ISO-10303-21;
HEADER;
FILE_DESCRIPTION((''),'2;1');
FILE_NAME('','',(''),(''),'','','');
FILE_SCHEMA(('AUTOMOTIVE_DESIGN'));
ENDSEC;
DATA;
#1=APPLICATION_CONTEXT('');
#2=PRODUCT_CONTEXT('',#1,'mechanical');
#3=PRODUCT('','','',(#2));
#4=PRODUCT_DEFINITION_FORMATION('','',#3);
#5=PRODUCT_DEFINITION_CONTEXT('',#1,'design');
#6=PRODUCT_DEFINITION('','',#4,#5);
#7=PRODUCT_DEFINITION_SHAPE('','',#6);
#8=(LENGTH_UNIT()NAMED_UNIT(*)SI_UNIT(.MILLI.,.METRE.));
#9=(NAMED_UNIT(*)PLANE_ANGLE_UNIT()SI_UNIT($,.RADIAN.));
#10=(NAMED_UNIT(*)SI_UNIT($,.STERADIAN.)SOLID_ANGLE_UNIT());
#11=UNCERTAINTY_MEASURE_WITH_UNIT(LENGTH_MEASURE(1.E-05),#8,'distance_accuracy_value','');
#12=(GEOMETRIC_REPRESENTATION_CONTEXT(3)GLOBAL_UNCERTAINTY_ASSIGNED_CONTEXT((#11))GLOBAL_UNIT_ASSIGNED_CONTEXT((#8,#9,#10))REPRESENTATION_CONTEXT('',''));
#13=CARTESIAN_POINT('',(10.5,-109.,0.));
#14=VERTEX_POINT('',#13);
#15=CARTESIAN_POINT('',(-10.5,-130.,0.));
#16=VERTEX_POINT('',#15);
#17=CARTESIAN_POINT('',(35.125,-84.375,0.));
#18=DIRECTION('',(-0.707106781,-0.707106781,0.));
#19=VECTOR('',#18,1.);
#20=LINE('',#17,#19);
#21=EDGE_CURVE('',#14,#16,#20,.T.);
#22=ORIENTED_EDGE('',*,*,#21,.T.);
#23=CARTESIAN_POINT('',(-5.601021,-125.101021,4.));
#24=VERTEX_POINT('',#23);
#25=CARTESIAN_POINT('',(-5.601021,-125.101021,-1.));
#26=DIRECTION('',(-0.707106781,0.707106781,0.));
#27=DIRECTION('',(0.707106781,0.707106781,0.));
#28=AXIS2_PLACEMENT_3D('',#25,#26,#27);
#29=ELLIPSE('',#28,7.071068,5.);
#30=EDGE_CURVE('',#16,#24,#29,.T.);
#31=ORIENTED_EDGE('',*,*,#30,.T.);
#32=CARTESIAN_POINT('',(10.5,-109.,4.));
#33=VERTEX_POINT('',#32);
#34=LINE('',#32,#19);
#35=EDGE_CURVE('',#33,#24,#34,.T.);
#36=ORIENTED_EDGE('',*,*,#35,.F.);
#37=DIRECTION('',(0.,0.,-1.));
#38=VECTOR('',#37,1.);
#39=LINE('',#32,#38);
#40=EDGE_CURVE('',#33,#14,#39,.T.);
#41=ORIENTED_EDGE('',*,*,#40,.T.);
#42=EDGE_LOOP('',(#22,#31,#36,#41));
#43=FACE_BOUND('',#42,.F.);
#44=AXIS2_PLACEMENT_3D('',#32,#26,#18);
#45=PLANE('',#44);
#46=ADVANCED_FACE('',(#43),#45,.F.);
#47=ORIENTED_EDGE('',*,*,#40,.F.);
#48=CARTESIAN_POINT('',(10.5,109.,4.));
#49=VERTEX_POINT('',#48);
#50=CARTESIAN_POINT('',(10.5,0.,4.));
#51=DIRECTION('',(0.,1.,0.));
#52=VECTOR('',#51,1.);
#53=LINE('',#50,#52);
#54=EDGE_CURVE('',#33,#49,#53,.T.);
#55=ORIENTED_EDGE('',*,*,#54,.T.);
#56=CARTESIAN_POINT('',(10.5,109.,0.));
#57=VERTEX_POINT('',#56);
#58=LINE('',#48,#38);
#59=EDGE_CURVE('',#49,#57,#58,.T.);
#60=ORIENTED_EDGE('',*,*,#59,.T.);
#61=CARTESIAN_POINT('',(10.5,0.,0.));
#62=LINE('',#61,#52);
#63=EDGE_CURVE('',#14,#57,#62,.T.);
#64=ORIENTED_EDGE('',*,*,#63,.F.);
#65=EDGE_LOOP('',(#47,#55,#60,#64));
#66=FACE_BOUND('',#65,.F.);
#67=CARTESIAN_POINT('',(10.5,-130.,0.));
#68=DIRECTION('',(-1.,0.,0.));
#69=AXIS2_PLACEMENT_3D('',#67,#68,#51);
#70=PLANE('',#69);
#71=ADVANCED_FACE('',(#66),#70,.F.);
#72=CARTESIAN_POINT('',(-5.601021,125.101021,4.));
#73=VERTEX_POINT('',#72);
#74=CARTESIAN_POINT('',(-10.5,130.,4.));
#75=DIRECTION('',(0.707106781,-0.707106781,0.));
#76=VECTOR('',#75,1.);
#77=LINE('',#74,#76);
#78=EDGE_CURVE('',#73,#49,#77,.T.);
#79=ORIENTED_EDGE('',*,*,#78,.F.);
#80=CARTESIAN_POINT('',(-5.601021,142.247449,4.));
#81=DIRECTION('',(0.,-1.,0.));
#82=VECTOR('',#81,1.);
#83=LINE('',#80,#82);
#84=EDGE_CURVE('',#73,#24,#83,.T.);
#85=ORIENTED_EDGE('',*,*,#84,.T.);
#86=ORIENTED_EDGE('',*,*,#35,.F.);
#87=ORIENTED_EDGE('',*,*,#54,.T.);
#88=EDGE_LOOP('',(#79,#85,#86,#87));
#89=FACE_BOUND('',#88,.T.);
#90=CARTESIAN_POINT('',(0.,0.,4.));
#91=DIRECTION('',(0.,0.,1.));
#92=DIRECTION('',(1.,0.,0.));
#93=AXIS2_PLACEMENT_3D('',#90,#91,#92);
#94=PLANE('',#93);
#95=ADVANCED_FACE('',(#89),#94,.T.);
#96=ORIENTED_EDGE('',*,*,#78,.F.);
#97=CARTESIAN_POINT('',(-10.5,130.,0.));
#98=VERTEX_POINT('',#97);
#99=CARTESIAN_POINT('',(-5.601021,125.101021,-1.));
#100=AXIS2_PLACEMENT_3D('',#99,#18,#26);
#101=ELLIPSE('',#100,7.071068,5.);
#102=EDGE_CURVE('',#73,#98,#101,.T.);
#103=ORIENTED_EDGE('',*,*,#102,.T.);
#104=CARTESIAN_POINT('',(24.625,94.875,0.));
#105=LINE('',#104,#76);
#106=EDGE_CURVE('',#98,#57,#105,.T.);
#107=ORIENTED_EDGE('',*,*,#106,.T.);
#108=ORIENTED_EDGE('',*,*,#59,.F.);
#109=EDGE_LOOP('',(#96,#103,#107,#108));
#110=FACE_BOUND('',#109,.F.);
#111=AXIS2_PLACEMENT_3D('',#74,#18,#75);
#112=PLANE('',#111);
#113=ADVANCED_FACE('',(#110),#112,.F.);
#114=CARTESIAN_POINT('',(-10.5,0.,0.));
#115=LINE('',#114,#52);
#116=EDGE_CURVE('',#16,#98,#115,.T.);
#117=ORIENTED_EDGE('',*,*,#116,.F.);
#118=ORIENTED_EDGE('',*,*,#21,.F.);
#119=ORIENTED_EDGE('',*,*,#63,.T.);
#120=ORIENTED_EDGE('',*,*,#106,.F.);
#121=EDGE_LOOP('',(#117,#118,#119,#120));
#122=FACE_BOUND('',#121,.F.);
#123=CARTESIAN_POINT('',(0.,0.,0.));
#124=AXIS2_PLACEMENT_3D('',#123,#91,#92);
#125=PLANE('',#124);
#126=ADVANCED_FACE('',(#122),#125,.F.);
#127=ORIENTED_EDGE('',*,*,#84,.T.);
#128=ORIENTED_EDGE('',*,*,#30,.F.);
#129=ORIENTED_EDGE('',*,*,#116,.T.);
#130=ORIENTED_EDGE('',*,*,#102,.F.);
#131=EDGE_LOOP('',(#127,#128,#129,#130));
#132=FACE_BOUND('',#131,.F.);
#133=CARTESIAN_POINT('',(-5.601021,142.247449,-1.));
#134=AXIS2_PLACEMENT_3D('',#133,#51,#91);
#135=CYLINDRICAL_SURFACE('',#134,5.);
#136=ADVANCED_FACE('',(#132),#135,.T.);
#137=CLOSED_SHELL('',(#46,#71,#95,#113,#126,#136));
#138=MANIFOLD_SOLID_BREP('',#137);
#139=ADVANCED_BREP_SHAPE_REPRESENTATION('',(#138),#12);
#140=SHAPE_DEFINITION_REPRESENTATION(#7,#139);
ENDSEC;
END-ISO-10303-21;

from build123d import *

# Parameters (mm, degrees)
F0_W        = 21
F0_H        = 260
F1_DEPTH    = 4
F3_DEPTH    = 4.001
F4_T1_DEPTH = 284.4948974279


# Not quite as in the source:
# - a fillet or chamfer that OpenCascade refuses, or shapes differently, is made with other operations: its cross-section is extruded or revolved along the edge and cut away or added


with BuildPart() as f1:
    # F0 (on Top) → F1 (new body)
    with BuildSketch(Plane.XY):
        Rectangle(F0_W, F0_H)
    extrude(amount=F1_DEPTH)

    # F2 (on face) → F3 (cut, through all)
    with BuildSketch(Plane.XY.offset(4)):
        Polygon((10.5, 130), (-10.5, 130), (10.5, 109), align=None)
        Polygon((10.5, -109), (-10.5, -130), (10.5, -130), align=None)
    extrude(amount=-F3_DEPTH, mode=Mode.SUBTRACT)

    # F4: fillet of radius 5 on 1 edges, made by hand

    # F4_s2 → F4_t1 (cut)
    with BuildSketch(Plane.XZ.offset(-142.2474487139)):
        with BuildLine():
            ThreePointArc((-5.6010205144, 4), (-8.7632981746, 2.8729833462), (-10.5, 0))
            Line((-10.5, 0), (-10.5, 4))
            Line((-10.5, 4), (-5.6010205144, 4))
        make_face()
    extrude(amount=F4_T1_DEPTH, mode=Mode.SUBTRACT)


solid = f1.part
